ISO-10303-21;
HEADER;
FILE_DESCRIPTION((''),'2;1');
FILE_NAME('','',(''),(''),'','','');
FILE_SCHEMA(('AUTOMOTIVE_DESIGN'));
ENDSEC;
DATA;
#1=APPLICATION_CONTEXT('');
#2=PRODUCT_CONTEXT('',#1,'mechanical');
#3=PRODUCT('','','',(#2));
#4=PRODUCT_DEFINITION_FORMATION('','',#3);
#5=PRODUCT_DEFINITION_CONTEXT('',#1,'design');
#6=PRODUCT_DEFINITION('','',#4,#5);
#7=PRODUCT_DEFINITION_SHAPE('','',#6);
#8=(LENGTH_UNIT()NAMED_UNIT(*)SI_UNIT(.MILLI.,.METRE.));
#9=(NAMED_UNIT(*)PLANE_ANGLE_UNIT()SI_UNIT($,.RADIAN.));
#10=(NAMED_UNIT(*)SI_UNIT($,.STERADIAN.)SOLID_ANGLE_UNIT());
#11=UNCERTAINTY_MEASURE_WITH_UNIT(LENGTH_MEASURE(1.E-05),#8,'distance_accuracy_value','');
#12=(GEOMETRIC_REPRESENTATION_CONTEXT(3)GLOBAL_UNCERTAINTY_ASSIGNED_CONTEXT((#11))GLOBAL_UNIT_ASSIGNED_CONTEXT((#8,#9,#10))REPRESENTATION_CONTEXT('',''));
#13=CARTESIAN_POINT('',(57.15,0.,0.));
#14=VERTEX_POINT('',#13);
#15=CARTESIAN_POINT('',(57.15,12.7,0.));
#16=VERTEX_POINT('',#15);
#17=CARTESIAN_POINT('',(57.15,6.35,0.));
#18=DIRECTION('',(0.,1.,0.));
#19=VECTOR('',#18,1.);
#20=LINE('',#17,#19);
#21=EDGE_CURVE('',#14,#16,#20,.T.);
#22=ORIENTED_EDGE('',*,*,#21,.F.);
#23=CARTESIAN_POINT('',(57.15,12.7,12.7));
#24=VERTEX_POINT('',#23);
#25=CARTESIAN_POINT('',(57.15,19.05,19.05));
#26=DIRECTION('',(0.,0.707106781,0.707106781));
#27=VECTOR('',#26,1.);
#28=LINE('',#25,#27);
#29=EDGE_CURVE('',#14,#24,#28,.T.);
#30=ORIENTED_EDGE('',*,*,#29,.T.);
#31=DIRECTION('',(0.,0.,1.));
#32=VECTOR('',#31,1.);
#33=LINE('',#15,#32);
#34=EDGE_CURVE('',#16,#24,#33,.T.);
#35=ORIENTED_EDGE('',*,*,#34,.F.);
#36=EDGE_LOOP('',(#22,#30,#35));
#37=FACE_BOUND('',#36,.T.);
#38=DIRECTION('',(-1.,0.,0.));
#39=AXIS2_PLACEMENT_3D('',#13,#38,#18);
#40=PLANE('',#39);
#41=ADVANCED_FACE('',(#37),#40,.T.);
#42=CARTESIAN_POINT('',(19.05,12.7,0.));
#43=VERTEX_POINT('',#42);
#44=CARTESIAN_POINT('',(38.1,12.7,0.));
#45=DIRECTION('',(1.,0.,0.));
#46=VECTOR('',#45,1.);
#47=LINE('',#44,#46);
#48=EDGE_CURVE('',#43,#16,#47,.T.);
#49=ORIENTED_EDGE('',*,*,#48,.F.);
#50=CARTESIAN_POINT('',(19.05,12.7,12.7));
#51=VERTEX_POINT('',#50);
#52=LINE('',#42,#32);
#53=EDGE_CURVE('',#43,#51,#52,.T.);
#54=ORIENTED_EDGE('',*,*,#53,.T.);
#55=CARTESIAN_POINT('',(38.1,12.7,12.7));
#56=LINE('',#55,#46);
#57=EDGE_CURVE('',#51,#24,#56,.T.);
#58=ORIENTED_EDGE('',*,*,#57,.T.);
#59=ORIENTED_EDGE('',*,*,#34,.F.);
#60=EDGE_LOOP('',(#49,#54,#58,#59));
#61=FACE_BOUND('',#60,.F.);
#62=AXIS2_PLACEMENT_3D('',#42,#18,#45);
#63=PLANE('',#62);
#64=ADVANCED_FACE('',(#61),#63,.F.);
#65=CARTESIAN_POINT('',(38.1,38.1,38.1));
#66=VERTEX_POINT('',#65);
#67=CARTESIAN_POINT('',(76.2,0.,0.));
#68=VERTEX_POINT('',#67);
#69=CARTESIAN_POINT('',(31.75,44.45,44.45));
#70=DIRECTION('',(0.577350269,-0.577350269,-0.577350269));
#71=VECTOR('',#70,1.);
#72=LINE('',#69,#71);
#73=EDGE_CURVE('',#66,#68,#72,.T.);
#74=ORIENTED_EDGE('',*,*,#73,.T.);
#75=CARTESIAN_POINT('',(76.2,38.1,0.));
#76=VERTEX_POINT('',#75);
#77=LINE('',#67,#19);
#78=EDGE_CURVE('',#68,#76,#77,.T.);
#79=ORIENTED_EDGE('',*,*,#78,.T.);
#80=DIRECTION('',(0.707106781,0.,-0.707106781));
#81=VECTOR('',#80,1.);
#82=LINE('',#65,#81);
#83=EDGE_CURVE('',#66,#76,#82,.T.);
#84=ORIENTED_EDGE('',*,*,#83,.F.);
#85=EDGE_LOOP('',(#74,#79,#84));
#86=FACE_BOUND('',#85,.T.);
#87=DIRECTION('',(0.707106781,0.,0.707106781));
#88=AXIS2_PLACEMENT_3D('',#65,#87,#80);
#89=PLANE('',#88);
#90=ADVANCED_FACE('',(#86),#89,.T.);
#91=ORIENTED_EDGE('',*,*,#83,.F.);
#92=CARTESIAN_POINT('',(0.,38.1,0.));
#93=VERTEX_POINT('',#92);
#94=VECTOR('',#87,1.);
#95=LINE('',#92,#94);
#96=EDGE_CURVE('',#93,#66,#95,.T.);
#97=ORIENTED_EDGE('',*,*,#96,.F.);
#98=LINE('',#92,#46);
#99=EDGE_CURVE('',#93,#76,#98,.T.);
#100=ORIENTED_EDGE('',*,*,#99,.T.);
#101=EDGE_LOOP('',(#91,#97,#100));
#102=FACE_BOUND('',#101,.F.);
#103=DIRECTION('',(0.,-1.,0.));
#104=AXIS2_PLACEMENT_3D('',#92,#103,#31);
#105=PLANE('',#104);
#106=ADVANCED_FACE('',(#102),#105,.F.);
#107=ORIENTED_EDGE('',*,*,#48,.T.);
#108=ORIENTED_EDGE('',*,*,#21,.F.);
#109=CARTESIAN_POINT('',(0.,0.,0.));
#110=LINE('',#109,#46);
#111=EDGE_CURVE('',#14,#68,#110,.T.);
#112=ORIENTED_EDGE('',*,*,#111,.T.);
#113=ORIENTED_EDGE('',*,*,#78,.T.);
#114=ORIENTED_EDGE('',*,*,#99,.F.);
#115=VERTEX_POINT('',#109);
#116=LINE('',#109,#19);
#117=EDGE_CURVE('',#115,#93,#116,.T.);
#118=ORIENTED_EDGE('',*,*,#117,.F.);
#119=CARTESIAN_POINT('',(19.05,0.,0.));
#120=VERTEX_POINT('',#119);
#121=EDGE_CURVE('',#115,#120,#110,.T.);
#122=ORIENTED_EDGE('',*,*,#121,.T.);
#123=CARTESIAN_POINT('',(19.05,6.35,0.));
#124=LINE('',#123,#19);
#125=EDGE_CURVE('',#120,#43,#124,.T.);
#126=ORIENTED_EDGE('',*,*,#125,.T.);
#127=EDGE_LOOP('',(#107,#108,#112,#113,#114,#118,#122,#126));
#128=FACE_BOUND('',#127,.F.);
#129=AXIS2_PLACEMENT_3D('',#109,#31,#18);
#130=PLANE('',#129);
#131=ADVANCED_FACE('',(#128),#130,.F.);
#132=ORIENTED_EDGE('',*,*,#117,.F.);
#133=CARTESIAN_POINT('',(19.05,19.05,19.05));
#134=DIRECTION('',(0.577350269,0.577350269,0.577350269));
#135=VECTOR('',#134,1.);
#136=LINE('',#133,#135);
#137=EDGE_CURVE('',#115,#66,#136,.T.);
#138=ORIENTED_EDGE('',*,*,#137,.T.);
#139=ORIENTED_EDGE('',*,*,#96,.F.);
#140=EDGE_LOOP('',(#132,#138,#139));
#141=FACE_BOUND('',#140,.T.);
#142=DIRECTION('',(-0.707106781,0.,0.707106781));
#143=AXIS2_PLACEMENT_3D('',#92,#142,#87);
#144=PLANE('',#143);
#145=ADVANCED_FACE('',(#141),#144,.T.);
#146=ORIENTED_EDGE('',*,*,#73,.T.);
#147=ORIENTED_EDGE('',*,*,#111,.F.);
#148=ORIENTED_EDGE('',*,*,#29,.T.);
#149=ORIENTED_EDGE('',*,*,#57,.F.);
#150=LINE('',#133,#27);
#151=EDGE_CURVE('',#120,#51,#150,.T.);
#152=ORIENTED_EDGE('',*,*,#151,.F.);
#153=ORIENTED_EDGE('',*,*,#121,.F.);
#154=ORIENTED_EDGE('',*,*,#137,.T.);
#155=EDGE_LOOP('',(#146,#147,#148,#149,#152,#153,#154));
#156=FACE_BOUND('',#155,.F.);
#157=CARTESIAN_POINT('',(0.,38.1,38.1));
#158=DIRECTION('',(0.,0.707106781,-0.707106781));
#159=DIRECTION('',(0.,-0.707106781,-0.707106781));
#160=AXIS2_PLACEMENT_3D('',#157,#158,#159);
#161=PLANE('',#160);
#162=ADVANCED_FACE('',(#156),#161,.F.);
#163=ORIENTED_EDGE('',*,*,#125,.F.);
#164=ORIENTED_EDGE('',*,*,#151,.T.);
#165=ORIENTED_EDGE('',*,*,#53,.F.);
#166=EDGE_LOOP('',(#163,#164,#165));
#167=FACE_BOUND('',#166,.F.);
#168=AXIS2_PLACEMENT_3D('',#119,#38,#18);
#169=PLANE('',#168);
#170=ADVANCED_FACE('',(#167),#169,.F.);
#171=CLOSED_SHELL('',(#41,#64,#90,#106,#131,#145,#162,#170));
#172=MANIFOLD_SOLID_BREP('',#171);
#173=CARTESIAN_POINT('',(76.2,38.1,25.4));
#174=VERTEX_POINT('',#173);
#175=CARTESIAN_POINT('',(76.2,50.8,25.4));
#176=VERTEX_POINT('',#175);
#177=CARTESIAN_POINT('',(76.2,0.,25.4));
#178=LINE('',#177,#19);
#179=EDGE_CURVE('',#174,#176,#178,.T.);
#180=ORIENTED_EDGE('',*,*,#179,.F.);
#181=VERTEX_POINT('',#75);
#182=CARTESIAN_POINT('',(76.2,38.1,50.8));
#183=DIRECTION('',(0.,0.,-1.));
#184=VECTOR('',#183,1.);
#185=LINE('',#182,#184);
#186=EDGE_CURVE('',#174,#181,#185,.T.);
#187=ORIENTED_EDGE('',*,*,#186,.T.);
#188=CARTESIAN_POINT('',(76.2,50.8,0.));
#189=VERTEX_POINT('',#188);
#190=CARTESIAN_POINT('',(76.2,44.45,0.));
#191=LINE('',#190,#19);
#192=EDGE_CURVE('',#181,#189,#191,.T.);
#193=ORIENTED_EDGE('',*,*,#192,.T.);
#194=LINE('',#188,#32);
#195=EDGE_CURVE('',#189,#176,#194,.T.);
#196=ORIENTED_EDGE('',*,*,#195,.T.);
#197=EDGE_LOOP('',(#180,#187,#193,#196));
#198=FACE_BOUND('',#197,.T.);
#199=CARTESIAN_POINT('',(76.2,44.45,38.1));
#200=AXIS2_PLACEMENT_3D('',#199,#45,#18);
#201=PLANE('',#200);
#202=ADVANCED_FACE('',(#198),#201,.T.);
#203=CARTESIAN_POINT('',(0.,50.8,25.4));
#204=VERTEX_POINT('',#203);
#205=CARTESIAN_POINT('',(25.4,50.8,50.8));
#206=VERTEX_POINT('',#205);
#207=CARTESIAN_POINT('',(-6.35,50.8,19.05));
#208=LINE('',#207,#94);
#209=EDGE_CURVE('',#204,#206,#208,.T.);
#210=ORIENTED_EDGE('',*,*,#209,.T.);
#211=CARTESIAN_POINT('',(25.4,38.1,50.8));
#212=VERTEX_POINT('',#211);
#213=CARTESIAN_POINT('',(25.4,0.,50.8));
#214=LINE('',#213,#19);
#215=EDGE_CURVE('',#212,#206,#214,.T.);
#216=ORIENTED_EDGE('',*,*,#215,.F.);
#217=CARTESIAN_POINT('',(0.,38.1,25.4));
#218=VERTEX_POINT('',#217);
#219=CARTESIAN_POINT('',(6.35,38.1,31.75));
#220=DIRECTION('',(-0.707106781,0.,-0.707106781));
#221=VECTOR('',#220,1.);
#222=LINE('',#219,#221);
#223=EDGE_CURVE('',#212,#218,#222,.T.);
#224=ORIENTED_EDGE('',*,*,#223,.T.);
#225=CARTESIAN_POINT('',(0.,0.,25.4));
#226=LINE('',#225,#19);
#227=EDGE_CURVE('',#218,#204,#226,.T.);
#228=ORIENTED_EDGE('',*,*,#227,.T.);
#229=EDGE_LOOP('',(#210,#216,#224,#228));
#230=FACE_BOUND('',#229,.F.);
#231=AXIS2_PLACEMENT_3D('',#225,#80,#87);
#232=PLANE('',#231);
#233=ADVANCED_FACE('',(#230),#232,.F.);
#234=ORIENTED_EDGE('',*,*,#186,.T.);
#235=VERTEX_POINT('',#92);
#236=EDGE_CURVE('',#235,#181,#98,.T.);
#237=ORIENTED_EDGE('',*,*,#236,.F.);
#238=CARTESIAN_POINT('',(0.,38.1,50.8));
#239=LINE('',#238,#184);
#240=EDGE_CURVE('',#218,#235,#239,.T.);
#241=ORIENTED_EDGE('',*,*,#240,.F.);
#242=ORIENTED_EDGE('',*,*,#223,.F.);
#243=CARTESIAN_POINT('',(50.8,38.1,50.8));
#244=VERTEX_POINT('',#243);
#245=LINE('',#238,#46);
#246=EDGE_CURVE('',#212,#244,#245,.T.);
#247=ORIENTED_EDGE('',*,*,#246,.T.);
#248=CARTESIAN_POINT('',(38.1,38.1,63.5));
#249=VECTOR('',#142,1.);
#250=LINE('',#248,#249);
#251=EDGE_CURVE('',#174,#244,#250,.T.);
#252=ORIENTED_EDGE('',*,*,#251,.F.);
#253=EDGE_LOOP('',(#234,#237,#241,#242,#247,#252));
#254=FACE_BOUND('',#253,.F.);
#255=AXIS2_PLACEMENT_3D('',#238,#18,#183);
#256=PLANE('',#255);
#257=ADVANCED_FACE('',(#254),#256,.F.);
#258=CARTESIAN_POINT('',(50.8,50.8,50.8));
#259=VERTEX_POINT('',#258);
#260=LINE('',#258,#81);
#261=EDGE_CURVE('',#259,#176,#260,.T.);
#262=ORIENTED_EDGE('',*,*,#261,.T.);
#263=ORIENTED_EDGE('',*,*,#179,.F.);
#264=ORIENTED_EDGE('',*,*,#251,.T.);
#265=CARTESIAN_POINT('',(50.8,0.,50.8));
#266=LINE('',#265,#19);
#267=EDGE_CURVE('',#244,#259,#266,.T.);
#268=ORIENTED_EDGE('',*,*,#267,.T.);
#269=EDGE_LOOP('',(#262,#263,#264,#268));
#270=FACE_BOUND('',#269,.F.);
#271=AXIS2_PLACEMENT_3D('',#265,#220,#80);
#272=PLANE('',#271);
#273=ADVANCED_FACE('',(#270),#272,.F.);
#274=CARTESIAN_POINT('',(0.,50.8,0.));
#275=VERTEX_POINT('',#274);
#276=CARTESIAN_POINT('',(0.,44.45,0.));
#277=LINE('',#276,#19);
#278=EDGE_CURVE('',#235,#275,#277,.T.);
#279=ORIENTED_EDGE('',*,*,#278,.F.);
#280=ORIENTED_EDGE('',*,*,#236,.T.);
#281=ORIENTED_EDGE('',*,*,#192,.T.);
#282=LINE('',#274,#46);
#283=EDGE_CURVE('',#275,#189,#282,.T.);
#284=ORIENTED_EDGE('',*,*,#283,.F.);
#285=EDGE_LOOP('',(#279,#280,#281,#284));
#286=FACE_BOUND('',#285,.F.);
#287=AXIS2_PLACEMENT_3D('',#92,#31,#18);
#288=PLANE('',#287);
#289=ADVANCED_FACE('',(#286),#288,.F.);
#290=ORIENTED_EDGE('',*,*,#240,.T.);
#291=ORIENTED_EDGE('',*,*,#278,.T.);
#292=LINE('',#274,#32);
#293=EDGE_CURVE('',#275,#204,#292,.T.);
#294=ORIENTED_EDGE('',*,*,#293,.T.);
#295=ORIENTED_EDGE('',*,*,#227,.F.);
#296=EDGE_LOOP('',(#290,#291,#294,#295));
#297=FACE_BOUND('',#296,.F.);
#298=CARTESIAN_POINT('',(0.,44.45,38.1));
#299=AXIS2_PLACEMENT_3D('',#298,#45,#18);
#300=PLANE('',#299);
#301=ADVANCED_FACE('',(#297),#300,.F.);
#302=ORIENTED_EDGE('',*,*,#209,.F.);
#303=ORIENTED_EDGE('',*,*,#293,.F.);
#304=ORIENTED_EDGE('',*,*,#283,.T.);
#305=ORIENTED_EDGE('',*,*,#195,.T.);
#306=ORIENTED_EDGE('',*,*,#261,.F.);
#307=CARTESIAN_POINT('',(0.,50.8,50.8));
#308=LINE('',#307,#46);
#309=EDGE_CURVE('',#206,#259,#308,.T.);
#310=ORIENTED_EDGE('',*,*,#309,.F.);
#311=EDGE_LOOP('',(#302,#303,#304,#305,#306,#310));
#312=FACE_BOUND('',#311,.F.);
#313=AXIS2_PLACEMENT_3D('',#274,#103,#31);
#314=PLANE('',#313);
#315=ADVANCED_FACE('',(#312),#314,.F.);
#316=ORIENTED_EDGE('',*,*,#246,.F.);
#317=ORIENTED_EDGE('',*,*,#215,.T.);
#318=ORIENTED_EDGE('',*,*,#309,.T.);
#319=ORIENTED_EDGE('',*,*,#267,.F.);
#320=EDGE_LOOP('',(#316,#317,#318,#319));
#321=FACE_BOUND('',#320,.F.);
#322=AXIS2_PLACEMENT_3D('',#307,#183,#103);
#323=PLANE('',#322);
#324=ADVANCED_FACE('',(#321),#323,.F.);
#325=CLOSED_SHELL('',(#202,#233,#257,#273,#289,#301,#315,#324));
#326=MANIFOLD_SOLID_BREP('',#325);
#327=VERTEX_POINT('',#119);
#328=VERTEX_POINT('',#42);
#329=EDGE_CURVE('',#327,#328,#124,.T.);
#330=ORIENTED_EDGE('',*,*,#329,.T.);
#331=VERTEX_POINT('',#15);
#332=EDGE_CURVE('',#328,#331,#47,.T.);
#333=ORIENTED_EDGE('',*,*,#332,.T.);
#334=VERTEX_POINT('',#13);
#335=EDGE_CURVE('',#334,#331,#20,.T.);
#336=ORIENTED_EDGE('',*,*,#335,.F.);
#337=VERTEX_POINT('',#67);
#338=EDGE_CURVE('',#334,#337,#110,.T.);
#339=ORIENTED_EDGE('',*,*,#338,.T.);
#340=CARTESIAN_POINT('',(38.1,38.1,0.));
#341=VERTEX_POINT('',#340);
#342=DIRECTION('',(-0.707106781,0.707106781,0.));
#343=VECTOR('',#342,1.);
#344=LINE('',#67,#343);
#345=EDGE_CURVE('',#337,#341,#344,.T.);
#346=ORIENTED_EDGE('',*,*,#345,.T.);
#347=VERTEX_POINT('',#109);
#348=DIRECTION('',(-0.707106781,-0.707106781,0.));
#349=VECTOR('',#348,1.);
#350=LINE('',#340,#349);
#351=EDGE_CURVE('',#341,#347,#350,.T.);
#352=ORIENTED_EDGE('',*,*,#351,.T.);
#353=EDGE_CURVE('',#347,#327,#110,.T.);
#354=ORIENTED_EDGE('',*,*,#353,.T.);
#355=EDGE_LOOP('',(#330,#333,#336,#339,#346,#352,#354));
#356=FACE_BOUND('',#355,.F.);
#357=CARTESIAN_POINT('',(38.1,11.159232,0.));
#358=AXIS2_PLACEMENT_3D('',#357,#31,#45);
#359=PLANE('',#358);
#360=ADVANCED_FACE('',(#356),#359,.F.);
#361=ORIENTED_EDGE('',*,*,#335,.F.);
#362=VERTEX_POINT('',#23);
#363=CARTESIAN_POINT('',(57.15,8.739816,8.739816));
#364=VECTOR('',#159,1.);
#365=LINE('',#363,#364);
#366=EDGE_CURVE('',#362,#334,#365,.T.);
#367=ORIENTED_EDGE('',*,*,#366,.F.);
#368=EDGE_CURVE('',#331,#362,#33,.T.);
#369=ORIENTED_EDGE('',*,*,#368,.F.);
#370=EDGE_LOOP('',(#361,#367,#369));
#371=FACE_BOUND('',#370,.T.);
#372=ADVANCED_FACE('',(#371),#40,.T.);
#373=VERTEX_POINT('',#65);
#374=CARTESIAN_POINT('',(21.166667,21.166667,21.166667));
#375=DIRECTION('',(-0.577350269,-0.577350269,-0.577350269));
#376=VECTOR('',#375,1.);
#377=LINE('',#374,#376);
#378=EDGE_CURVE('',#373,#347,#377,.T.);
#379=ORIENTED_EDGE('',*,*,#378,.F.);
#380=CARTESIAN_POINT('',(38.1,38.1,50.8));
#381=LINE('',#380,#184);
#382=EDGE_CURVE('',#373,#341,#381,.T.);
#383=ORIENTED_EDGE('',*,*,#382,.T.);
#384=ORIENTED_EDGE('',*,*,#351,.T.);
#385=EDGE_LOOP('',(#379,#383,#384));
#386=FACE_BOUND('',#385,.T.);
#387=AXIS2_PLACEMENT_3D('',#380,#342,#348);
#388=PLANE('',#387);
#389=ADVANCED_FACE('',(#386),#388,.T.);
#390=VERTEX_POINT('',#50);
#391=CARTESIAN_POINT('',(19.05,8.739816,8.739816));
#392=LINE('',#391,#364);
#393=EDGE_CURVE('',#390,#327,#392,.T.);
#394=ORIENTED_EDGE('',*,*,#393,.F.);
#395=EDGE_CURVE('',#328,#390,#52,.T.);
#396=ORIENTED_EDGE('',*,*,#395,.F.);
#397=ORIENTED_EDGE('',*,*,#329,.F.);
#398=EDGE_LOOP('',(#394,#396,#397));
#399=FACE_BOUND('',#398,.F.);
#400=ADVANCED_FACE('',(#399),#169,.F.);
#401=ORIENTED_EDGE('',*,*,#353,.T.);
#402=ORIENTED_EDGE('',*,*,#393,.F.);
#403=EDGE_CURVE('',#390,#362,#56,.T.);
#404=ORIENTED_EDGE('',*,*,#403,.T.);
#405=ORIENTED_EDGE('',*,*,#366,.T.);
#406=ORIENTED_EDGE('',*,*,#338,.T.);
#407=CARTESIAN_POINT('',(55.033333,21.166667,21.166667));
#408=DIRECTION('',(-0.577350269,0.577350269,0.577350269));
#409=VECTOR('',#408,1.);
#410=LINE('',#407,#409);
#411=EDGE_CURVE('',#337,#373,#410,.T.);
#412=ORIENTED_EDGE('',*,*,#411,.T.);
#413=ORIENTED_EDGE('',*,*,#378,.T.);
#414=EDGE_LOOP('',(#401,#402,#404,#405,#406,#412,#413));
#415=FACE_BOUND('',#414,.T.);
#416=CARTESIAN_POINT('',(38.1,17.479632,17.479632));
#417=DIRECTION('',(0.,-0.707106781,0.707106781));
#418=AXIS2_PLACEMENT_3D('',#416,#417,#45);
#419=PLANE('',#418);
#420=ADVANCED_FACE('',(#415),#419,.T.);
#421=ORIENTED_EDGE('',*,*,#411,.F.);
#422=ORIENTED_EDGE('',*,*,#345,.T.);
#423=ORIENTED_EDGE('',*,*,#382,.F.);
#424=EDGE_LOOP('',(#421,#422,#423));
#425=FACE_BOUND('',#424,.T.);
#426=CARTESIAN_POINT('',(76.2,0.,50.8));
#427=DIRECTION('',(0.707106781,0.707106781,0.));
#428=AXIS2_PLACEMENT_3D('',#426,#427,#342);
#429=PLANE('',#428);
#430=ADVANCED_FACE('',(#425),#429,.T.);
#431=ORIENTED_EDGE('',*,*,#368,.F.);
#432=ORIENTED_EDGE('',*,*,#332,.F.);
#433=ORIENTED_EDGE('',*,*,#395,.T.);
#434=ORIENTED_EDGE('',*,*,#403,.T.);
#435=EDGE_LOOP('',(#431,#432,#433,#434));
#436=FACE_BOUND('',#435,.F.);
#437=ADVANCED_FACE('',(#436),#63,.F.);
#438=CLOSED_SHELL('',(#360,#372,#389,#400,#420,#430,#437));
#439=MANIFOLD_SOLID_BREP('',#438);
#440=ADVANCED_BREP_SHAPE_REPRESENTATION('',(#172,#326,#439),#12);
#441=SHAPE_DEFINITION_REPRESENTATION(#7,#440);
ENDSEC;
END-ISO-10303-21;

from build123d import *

# Parameters (mm, degrees)
F2_W      = 12.7
F2_H      = 25.4
F3_DEPTH  = 76.2
F4_DEPTH  = 50.801
F6_DEPTH  = 50.8
F7_DEPTH  = 38.1
F8_DEPTH  = 76.2
F9_DEPTH  = 50.801
F11_DEPTH = 155
F13_DEPTH = 76.2
F1_W      = 38.1
F1_H      = 12.7
F14_DEPTH = 12.7


# Not quite as in the source:
# - an extrude ends at something that could not be found from the text; its depth is read off the source's solid


with BuildPart() as f3:
    # F2 (on Right) → F3 (new body)
    with BuildSketch(Plane.YZ):
        Polygon((38.1, 50.8), (38.1, 38.1), (38.1, 25.4), (50.8, 25.4), (50.8, 50.8), align=None)
        with Locations((44.45, 12.7)):
            Rectangle(F2_W, F2_H)
    extrude(amount=F3_DEPTH)

    # F0 (on Front) → F4 (cut, through all)
    with BuildSketch(Plane.XZ):
        Polygon((0, 50.8), (0, 25.4), (25.4, 50.8), align=None)
        Polygon((76.2, 50.8), (50.8, 50.8), (76.2, 25.4), align=None)
    extrude(amount=-F4_DEPTH, mode=Mode.SUBTRACT)


with BuildPart() as f6:
    # F5 (on face) → F6 (new body)
    with BuildSketch(Plane.XY.offset(50.8)):
        Polygon((76.2, 0), (38.1, 38.1), (0, 0), align=None)
    extrude(amount=-F6_DEPTH)

    # F0 (on Front) → F7 (cut, through all)
    with BuildSketch(Plane.XZ):
        Polygon((0, 25.4), (0, 0), (38.1, 38.1), (76.2, 0), (76.2, 25.4), (50.8, 50.8), (25.4, 50.8), align=None)
    extrude(amount=-F7_DEPTH, mode=Mode.SUBTRACT)


with BuildPart() as f8:
    # F2 (on Right) → F8 (new body)
    with BuildSketch(Plane.YZ):
        Polygon((38.1, 38.1), (0, 0), (38.1, 0), (38.1, 25.4), align=None)
    extrude(amount=F8_DEPTH)


with BuildPart() as f9_tool:
    # F9 (cut, through all): faces of the model
    f9_faces = [f6.part.faces().sort_by_distance(p)[0] for p in [
        (67.7333333333, 0, 42.3333333333),
        (8.4666666667, 0, 42.3333333333),
    ]]
    extrude(f9_faces, amount=-F9_DEPTH)


with BuildPart() as f6_1:
    add(f6.part)

    # F9: cut by f9_tool
    add(f9_tool.part, mode=Mode.SUBTRACT)

    # F10 (on face) → F11 (cut, through all)
    with BuildSketch(Plane(origin=(0, 0, 0), x_dir=(1, 0, 0), z_dir=(0, -0.7071067812, 0.7071067812))):
        Polygon((63.5, 53.8815367264), (12.7, 53.8815367264), (0, 35.9210244843), (0, 0), (76.2, 0), (76.2, 35.9210244843), align=None)
    extrude(amount=F11_DEPTH, mode=Mode.SUBTRACT)


with BuildPart() as f8_1:
    add(f8.part)

    # F9: cut by f9_tool
    add(f9_tool.part, mode=Mode.SUBTRACT)

    # F12 (on face) → F13 (cut)
    with BuildSketch(Plane.XZ.offset(-38.1)):
        Polygon((76.2, 38.1), (38.1, 38.1), (76.2, 0), align=None)
        Polygon((0, 0), (38.1, 38.1), (0, 38.1), align=None)
    extrude(amount=F13_DEPTH, mode=Mode.SUBTRACT)


with BuildPart() as f14_tool:
    # F1 (on Top) → F14 (new body)
    with BuildSketch(Plane.XY):
        with Locations((38.1, 6.35)):
            Rectangle(F1_W, F1_H)
    extrude(amount=F14_DEPTH)


with BuildPart() as f6_2:
    add(f6_1.part)

    # F14: cut by f14_tool
    add(f14_tool.part, mode=Mode.SUBTRACT)


with BuildPart() as f8_2:
    add(f8_1.part)

    # F14: cut by f14_tool
    add(f14_tool.part, mode=Mode.SUBTRACT)


solid = Compound([f3.part, f6_2.part, f8_2.part])
